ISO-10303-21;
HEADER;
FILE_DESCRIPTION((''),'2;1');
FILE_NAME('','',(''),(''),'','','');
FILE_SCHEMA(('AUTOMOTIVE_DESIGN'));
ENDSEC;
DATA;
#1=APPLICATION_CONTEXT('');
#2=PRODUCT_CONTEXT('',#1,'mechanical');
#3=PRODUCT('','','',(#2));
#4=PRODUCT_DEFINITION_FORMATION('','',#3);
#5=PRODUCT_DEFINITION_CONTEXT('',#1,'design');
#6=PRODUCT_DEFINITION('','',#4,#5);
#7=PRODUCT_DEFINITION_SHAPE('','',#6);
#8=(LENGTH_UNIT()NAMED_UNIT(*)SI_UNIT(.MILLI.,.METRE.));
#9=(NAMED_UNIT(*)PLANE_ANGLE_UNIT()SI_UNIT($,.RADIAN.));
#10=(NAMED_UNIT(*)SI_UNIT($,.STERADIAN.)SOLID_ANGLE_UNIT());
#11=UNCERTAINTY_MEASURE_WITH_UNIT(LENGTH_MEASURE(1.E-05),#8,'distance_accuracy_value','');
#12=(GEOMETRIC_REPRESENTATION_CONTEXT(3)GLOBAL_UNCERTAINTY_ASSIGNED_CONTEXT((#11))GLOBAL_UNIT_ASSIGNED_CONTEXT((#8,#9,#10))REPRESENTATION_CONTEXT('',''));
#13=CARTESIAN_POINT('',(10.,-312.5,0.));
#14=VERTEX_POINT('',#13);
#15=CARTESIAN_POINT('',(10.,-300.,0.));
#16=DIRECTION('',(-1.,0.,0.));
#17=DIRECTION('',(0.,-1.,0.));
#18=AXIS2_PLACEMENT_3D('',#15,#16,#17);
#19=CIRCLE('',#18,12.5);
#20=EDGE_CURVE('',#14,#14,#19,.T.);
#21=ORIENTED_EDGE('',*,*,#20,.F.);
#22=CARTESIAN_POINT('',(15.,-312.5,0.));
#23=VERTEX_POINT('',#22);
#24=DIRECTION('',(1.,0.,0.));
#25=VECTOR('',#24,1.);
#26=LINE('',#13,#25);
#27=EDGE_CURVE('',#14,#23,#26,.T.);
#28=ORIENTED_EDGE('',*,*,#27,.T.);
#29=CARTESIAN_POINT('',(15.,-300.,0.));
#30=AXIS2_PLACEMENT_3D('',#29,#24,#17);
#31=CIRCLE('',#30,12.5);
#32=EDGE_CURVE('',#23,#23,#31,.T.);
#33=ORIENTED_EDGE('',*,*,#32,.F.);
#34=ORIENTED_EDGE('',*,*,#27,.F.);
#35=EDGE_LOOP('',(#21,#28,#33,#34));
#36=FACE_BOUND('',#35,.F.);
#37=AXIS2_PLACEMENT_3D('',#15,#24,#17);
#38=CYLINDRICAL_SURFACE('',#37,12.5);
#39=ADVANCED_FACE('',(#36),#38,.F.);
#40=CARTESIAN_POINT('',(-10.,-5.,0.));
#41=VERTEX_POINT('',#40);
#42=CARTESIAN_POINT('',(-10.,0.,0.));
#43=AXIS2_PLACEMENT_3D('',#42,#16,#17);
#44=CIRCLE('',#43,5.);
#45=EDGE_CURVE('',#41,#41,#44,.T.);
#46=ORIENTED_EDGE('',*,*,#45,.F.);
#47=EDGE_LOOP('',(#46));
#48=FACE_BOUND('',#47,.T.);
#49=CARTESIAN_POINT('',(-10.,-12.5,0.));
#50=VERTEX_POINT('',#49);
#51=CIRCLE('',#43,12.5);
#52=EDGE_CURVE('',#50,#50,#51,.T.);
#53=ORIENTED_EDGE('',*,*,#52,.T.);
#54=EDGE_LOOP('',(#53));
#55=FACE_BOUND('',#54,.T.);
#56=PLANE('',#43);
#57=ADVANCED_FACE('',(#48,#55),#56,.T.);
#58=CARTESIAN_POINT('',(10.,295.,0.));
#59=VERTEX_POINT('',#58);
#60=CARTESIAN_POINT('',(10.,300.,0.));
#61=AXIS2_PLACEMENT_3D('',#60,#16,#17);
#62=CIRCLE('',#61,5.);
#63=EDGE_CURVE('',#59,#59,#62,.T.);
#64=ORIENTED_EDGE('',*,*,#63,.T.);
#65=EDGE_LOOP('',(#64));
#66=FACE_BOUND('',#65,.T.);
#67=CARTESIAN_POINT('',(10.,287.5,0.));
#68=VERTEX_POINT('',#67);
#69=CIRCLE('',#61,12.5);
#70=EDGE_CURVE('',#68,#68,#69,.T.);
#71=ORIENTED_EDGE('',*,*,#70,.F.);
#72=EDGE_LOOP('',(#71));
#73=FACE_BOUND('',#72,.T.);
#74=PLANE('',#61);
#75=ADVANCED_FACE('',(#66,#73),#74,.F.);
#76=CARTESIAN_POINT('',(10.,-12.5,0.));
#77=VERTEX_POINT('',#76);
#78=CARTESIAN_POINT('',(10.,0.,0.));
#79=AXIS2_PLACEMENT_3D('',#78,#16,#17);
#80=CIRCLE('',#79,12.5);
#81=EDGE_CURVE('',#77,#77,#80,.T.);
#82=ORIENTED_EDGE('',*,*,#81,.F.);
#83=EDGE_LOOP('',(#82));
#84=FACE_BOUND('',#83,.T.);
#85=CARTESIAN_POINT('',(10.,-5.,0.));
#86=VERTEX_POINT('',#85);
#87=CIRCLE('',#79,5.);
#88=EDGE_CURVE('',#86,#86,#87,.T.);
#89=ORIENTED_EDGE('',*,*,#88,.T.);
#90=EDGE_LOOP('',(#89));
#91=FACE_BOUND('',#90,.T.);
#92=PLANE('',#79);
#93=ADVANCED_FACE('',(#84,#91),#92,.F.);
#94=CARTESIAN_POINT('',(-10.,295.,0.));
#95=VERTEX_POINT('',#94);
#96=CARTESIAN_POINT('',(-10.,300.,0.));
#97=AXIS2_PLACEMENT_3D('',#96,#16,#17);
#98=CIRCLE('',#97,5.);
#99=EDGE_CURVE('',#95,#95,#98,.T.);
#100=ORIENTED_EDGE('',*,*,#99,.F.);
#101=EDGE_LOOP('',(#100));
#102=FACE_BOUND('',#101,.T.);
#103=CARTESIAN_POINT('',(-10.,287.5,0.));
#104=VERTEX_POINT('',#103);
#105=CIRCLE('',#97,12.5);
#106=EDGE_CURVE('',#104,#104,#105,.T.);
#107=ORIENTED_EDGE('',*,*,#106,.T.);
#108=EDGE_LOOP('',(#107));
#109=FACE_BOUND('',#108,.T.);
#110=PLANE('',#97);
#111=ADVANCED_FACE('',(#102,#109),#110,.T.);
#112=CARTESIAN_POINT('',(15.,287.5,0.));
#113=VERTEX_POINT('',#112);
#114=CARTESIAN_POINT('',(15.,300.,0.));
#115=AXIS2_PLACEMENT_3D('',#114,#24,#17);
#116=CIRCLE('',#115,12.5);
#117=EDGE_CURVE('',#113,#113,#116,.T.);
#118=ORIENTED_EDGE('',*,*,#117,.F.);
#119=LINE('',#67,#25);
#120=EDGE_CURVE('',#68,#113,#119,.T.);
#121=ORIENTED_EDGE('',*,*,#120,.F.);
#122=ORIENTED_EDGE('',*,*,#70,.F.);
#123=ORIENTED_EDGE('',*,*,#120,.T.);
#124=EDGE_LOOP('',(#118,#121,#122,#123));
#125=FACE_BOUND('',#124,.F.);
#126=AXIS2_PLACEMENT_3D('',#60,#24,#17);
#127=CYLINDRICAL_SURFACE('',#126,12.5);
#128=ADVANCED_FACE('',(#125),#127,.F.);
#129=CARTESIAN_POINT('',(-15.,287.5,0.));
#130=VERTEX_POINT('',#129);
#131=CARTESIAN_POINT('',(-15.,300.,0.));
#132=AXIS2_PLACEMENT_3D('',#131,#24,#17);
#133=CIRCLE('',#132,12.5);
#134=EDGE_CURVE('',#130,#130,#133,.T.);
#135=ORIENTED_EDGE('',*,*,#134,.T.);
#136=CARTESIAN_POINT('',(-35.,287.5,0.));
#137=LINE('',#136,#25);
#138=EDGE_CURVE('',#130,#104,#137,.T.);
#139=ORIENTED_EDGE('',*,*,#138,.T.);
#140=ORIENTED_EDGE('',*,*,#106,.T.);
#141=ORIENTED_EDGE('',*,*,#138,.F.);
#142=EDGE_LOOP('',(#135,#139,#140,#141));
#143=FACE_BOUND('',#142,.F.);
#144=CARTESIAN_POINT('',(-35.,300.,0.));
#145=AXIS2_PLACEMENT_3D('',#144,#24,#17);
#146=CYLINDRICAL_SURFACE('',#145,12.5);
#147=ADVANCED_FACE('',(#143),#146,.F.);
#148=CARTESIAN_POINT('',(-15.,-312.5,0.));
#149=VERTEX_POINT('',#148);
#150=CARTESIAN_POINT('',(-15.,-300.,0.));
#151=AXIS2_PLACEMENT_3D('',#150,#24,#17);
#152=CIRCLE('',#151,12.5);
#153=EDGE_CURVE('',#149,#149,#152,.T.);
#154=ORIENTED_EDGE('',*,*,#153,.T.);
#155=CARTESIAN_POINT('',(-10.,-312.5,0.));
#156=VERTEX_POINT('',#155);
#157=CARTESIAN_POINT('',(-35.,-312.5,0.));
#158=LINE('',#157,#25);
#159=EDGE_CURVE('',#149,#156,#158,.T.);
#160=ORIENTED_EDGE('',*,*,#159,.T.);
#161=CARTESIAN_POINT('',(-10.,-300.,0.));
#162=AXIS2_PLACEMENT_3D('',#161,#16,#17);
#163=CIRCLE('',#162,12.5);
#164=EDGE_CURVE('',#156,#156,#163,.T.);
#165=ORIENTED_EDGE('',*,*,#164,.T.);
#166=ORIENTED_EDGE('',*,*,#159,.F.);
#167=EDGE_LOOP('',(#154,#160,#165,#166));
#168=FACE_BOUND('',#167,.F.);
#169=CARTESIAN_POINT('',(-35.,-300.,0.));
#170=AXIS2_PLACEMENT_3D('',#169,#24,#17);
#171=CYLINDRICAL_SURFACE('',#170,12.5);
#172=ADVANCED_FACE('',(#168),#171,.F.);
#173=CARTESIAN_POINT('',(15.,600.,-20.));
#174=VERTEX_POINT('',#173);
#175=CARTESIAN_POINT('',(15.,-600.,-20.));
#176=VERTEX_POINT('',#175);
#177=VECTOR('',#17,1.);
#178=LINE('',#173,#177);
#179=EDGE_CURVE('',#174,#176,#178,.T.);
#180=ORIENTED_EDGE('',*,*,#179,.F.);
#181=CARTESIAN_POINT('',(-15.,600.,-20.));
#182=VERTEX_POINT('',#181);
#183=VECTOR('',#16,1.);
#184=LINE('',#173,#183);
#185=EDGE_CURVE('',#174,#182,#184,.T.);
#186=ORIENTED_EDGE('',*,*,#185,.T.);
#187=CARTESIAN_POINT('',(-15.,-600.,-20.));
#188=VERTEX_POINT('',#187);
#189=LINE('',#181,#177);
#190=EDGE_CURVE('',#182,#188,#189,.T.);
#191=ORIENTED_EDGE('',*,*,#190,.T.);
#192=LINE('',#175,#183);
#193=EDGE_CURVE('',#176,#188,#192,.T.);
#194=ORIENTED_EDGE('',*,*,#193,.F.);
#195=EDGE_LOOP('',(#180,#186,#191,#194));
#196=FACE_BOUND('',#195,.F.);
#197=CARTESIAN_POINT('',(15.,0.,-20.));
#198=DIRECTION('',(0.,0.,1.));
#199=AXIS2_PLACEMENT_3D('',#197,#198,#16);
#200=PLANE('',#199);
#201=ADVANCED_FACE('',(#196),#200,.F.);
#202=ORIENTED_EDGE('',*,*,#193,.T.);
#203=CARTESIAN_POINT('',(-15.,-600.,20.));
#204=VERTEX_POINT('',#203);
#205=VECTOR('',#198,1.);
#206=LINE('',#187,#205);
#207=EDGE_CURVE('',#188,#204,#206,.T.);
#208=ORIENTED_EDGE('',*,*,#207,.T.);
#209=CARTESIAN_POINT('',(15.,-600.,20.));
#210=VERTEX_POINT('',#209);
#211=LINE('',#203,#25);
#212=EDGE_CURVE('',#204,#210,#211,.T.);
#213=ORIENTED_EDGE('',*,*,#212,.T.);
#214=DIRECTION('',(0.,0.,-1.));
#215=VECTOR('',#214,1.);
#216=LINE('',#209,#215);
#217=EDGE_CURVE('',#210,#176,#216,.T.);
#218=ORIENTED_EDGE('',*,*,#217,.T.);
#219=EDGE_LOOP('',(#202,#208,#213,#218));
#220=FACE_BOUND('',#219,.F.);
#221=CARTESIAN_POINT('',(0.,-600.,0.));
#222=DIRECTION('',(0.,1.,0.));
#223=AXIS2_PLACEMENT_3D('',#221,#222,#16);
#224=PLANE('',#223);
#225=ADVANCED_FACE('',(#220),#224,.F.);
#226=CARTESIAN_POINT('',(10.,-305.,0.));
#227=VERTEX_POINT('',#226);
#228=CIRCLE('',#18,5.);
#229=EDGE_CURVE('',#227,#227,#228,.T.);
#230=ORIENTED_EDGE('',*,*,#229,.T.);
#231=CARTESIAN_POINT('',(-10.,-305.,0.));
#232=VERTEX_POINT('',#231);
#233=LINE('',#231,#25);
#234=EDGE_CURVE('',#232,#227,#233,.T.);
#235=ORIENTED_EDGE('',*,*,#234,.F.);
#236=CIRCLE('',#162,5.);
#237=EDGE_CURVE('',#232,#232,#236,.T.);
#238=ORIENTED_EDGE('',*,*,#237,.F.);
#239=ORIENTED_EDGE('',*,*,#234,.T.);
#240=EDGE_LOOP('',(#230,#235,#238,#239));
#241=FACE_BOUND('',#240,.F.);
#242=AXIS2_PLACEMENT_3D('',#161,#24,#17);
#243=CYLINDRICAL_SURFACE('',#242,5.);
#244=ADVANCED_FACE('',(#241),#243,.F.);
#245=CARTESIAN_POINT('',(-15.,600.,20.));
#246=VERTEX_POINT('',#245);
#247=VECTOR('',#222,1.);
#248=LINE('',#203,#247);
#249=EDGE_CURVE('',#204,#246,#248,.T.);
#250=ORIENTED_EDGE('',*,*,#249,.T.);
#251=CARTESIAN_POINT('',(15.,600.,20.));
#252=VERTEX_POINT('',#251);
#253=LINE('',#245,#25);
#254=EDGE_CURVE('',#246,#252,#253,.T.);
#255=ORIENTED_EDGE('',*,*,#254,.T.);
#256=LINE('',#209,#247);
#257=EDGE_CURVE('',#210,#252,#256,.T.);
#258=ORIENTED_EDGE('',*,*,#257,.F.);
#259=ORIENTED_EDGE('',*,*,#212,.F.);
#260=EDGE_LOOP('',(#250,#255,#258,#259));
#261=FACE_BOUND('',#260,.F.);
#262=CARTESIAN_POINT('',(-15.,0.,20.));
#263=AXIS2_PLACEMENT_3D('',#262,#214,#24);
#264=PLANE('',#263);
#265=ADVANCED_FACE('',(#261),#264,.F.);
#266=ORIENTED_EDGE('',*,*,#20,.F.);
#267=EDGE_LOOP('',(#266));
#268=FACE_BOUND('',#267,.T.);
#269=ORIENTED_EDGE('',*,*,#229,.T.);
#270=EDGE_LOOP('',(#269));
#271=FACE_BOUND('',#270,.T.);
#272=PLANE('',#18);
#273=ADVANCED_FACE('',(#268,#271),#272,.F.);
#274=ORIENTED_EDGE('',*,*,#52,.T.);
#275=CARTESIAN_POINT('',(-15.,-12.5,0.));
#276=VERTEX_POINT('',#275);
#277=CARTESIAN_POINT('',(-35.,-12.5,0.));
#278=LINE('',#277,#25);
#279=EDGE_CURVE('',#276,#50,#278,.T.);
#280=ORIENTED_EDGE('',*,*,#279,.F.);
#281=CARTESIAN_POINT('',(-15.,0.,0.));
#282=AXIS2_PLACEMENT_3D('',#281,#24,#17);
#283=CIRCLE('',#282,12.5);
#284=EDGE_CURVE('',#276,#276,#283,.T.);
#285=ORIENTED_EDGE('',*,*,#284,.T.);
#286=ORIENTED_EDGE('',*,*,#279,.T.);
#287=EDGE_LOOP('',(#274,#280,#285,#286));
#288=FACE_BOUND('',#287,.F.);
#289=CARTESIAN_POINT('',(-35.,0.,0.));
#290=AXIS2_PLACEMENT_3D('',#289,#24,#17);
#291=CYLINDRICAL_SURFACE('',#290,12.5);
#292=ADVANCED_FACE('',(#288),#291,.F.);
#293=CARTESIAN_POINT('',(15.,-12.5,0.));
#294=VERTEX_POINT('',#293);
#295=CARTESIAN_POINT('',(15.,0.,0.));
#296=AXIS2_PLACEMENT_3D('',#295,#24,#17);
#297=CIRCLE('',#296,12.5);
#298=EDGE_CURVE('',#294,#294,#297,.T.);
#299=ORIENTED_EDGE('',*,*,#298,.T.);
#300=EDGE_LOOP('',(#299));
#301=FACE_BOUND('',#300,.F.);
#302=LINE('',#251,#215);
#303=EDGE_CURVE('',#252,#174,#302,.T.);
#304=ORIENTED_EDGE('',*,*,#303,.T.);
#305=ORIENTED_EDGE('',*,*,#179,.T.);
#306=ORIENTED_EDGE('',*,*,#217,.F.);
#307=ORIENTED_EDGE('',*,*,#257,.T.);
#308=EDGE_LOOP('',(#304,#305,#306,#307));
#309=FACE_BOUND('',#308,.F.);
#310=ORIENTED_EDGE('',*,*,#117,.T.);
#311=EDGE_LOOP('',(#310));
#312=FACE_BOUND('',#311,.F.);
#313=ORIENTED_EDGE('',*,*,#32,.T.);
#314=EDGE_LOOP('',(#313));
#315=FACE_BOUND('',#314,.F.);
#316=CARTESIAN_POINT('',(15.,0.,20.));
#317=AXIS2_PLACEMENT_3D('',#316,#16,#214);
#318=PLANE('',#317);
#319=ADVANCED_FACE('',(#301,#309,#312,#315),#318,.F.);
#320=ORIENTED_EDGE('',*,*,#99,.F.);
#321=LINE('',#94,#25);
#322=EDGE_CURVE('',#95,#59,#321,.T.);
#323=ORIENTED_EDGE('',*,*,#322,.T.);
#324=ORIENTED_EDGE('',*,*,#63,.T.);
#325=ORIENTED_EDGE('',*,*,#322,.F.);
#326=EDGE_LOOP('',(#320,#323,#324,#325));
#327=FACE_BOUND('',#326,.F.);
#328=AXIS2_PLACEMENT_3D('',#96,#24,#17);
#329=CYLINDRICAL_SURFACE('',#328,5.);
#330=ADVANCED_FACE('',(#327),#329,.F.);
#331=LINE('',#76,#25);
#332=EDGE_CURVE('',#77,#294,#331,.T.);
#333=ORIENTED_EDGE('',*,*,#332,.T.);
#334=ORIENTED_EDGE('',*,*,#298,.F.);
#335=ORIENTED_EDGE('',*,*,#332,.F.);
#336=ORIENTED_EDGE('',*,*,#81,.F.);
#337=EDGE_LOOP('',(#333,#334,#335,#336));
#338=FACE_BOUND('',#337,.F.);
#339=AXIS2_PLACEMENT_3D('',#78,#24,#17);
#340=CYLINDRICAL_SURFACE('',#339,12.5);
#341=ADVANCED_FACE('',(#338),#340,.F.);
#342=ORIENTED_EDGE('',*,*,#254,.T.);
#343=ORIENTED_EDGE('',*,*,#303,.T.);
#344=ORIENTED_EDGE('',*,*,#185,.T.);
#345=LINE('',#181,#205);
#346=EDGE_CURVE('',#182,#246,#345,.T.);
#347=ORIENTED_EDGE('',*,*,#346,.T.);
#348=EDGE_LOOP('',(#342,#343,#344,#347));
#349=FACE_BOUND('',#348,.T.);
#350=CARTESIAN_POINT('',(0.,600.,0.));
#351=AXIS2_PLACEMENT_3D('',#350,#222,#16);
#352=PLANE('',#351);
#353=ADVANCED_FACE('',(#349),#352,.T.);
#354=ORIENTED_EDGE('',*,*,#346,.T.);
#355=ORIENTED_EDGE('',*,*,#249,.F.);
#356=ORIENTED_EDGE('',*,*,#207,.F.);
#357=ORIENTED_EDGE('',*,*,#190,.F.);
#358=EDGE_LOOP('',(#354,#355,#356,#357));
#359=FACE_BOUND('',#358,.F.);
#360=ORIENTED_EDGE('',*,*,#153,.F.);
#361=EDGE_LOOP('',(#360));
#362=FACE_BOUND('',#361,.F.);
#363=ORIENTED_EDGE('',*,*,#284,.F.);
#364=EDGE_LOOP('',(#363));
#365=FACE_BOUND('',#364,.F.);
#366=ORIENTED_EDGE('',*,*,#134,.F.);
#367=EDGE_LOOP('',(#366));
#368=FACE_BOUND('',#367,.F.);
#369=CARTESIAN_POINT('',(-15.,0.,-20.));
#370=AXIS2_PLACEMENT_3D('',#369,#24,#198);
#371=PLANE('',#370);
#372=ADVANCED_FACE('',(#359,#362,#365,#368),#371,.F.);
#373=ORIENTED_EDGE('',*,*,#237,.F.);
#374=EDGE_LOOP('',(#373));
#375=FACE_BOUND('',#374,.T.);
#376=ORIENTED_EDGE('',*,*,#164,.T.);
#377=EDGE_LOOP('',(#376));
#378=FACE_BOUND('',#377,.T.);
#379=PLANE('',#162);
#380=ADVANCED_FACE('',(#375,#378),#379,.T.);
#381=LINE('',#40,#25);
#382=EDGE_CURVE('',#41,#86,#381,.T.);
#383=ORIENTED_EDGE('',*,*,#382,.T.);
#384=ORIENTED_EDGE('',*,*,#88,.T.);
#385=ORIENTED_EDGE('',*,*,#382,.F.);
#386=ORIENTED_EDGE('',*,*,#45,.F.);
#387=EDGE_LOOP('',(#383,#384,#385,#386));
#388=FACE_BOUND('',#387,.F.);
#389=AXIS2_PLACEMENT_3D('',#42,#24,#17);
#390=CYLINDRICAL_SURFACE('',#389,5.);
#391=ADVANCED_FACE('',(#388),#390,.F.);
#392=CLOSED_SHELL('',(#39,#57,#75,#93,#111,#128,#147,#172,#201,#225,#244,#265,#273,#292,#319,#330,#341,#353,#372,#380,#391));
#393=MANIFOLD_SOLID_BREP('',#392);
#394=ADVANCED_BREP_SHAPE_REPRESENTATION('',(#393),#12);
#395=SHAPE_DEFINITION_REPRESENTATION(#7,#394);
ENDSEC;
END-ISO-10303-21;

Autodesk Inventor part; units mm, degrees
ref_plane "YZ Plane" through (0, 0, 0) normal (1, 0, 0) x (0, 1, 0)
ref_plane "XZ Plane" through (0, 0, 0) normal (0, 1, 0) x (-1, 0, 0)
ref_plane "XY Plane" through (0, 0, 0) normal (0, 0, 1) x (1, 0, 0)
sketch "Sketch1" plane through (0, 0, 0) normal (0, 1, 0) x (-1, 0, 0)
  line L0 (15, 20) -> (-15, 20)
  line L1 (-15, 20) -> (-15, -20)
  line L2 (-15, -20) -> (15, -20)
  line L3 (15, -20) -> (15, 20)
  point P0 (0, 0)
  point P1 (15, 0)
  point P2 (0, -20)
  dimension "d0" = 40
  dimension "d1" = 30
extrude "Extrusion1" add sketch "Sketch1" along normal mid plane 1200
sketch "Sketch2" plane through (0, 0, 0) normal (0, 0, 1) x (1, 0, 0)
  line L0 (35, 0) -> (-35, 0)
  line L1 (-35, 0) -> (-35, -12.5)
  line L2 (-35, -12.5) -> (-10, -12.5)
  line L3 (-10, -12.5) -> (-10, -5)
  line L4 (-10, -5) -> (10, -5)
  line L5 (10, -5) -> (10, -12.5)
  line L6 (10, -12.5) -> (35, -12.5)
  line L7 (35, -12.5) -> (35, 0)
  point P0 (0, 0)
  point P1 (0, 0)
  dimension "d4" = 10
  dimension "d5" = 70
  dimension "d6" = 25
  dimension "d7" = 20
revolve "Revolution1" cut sketch "Sketch2" angle 360 about axis through (35, 0, 0) along (-1, 0, 0)
pattern_linear "Rectangular Pattern1" count 3 spacing 300 along (0, 1, 0) of "Revolution1" first direction both ways yes
